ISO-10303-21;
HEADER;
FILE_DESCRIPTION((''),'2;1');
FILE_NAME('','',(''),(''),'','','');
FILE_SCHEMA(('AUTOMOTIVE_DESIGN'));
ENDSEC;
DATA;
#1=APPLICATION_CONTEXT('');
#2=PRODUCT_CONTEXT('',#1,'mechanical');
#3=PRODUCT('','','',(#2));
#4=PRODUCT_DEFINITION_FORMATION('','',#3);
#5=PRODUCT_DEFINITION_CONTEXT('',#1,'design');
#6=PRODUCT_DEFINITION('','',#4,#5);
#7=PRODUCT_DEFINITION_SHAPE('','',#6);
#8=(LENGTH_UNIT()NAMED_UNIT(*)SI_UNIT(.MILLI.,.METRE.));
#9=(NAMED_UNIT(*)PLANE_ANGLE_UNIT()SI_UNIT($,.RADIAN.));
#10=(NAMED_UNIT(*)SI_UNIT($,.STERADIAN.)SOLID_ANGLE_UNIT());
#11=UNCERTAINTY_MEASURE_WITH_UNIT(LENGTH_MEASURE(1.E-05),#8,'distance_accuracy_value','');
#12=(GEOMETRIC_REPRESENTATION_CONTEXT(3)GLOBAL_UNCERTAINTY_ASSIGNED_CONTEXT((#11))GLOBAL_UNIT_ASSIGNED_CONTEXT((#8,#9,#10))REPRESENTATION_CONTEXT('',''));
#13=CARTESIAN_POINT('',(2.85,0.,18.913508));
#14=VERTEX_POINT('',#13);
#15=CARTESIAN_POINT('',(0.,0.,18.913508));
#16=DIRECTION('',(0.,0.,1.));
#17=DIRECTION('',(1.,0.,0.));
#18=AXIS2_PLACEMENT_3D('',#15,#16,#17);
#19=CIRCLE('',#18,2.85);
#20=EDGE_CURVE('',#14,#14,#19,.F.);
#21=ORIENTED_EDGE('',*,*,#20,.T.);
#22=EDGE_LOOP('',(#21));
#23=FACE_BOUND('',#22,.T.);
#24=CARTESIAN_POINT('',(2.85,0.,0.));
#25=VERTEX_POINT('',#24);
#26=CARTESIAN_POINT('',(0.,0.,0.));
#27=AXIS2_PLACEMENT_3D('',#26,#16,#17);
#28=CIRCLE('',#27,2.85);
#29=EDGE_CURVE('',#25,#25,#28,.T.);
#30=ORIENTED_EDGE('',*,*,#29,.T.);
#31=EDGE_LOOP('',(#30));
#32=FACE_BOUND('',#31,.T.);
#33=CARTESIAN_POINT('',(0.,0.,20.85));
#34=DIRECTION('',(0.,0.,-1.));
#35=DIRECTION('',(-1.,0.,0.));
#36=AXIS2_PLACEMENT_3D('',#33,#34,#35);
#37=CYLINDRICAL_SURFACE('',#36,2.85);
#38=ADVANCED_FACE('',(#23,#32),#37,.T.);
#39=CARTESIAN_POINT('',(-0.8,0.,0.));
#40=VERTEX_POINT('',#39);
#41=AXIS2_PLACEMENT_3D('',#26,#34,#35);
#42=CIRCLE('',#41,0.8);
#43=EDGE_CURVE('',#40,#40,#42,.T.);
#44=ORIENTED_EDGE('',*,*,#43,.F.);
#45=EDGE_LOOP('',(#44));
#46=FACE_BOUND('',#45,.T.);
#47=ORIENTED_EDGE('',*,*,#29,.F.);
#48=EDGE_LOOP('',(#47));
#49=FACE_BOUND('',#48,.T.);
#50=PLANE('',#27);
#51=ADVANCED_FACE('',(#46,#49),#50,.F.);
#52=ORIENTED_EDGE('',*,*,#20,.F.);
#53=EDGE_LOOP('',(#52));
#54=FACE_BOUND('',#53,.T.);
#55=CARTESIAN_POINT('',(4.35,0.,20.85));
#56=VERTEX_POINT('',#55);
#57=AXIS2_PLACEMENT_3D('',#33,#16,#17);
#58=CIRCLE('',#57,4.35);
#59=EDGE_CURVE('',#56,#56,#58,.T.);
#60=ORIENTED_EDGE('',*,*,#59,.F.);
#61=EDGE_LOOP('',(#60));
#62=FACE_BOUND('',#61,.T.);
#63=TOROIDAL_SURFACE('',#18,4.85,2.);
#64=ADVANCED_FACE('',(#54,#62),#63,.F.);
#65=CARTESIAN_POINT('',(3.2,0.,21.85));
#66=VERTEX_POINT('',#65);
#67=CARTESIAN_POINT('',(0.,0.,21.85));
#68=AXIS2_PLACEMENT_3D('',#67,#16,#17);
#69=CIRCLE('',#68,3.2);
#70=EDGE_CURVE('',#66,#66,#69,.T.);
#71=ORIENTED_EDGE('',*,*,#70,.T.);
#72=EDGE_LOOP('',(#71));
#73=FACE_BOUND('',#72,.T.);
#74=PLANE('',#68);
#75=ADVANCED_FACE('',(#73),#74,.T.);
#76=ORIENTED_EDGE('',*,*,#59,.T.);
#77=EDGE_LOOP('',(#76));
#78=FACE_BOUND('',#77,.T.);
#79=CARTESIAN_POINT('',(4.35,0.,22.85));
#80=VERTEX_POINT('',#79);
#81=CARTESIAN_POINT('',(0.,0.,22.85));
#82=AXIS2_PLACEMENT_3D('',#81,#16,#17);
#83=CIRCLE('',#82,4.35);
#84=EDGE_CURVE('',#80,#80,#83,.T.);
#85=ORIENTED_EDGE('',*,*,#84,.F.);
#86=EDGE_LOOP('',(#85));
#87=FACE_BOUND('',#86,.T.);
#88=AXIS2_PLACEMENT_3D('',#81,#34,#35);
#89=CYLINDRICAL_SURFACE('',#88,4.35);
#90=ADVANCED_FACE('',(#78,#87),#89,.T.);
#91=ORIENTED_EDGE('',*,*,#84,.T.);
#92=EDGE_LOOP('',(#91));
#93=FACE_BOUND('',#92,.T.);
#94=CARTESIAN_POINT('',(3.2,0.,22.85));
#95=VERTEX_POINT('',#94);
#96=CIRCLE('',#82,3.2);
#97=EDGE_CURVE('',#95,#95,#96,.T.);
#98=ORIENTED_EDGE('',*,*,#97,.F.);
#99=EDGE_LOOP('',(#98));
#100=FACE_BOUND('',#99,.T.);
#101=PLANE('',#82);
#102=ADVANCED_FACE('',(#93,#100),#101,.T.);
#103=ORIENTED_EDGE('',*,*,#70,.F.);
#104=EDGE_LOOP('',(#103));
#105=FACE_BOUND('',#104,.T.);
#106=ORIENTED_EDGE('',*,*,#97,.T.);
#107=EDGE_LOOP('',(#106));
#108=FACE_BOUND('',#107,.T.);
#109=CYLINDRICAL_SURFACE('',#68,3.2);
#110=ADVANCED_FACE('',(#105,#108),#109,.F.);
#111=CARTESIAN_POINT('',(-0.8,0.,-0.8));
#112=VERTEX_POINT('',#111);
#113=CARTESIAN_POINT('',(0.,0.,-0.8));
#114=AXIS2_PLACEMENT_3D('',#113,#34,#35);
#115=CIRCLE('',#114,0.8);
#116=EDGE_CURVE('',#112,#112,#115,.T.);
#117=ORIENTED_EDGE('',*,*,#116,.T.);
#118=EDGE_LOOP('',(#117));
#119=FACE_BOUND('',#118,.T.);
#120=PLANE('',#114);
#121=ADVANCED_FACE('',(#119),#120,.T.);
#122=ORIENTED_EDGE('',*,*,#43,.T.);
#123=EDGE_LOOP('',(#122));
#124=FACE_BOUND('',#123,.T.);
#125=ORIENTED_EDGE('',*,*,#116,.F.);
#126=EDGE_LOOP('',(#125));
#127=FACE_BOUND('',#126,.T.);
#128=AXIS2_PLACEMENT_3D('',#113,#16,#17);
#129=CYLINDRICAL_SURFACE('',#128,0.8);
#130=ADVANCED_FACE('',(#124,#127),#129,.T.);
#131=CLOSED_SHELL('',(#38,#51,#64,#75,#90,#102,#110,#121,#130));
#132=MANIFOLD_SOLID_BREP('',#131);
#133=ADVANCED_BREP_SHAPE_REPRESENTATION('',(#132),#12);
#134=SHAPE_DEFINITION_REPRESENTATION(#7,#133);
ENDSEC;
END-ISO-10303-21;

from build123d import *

# Parameters (mm, degrees)
ESQUISSE1_R             = 2.85
SHAPE_DEPTH             = 20.85
ESQUISSE2_R             = 4.35
BOSS_EXTRU_2_DEPTH      = 2
ESQUISSE3_R             = 3.2
ENL_V_MAT_EXTRU_1_DEPTH = 1
CONG_1_R                = 2
ESQUISSE4_R             = 0.8
ALIGNBEAM_DEPTH         = 0.8


with BuildPart() as part:
    # Esquisse1 → Shape (new body)
    with BuildSketch(Plane.XY):
        Circle(ESQUISSE1_R)
    extrude(amount=SHAPE_DEPTH)

    # Esquisse2 → Boss.-Extru.2 (add)
    with BuildSketch(Plane.XY.offset(20.85)):
        Circle(ESQUISSE2_R)
    extrude(amount=BOSS_EXTRU_2_DEPTH)

    # Esquisse3 → Enlèv. mat.-Extru.1 (cut)
    with BuildSketch(Plane.XY.offset(22.85)):
        Circle(ESQUISSE3_R)
    extrude(amount=-ENL_V_MAT_EXTRU_1_DEPTH, mode=Mode.SUBTRACT)

    # Congé1
    # the kernel refuses this fillet: 2 mm, written as the material it adds along each edge
    with BuildSketch(Plane(origin=(0, 0, 20.85), x_dir=(1, 0, 0), z_dir=(0, -1, 0))) as cong_1_piece_1:
        with BuildLine():
            CenterArc((4.85, -1.936491673), CONG_1_R, 104.477512186, 75.522487814)
            Line((2.85, -1.936491673), (2.81, -1.936491673))
            Line((2.81, -1.936491673), (2.81, 0))
            Line((2.81, 0), (2.85, 0.04))
            ThreePointArc((2.85, 0.04), (3.6, 0.04), (4.34, 0.038729833))
            Line((4.34, 0.038729833), (4.35, 0))
        make_face()
    revolve(axis=Axis((0, 0, 20.85), (0, 0, 1)))

    # Esquisse4 → AlignBeam (add)
    with BuildSketch(Plane(origin=(0, 0, 0), x_dir=(-1, 0, 0), z_dir=(0, 0, -1))):
        Circle(ESQUISSE4_R)
    extrude(amount=ALIGNBEAM_DEPTH)


solid = part.part
